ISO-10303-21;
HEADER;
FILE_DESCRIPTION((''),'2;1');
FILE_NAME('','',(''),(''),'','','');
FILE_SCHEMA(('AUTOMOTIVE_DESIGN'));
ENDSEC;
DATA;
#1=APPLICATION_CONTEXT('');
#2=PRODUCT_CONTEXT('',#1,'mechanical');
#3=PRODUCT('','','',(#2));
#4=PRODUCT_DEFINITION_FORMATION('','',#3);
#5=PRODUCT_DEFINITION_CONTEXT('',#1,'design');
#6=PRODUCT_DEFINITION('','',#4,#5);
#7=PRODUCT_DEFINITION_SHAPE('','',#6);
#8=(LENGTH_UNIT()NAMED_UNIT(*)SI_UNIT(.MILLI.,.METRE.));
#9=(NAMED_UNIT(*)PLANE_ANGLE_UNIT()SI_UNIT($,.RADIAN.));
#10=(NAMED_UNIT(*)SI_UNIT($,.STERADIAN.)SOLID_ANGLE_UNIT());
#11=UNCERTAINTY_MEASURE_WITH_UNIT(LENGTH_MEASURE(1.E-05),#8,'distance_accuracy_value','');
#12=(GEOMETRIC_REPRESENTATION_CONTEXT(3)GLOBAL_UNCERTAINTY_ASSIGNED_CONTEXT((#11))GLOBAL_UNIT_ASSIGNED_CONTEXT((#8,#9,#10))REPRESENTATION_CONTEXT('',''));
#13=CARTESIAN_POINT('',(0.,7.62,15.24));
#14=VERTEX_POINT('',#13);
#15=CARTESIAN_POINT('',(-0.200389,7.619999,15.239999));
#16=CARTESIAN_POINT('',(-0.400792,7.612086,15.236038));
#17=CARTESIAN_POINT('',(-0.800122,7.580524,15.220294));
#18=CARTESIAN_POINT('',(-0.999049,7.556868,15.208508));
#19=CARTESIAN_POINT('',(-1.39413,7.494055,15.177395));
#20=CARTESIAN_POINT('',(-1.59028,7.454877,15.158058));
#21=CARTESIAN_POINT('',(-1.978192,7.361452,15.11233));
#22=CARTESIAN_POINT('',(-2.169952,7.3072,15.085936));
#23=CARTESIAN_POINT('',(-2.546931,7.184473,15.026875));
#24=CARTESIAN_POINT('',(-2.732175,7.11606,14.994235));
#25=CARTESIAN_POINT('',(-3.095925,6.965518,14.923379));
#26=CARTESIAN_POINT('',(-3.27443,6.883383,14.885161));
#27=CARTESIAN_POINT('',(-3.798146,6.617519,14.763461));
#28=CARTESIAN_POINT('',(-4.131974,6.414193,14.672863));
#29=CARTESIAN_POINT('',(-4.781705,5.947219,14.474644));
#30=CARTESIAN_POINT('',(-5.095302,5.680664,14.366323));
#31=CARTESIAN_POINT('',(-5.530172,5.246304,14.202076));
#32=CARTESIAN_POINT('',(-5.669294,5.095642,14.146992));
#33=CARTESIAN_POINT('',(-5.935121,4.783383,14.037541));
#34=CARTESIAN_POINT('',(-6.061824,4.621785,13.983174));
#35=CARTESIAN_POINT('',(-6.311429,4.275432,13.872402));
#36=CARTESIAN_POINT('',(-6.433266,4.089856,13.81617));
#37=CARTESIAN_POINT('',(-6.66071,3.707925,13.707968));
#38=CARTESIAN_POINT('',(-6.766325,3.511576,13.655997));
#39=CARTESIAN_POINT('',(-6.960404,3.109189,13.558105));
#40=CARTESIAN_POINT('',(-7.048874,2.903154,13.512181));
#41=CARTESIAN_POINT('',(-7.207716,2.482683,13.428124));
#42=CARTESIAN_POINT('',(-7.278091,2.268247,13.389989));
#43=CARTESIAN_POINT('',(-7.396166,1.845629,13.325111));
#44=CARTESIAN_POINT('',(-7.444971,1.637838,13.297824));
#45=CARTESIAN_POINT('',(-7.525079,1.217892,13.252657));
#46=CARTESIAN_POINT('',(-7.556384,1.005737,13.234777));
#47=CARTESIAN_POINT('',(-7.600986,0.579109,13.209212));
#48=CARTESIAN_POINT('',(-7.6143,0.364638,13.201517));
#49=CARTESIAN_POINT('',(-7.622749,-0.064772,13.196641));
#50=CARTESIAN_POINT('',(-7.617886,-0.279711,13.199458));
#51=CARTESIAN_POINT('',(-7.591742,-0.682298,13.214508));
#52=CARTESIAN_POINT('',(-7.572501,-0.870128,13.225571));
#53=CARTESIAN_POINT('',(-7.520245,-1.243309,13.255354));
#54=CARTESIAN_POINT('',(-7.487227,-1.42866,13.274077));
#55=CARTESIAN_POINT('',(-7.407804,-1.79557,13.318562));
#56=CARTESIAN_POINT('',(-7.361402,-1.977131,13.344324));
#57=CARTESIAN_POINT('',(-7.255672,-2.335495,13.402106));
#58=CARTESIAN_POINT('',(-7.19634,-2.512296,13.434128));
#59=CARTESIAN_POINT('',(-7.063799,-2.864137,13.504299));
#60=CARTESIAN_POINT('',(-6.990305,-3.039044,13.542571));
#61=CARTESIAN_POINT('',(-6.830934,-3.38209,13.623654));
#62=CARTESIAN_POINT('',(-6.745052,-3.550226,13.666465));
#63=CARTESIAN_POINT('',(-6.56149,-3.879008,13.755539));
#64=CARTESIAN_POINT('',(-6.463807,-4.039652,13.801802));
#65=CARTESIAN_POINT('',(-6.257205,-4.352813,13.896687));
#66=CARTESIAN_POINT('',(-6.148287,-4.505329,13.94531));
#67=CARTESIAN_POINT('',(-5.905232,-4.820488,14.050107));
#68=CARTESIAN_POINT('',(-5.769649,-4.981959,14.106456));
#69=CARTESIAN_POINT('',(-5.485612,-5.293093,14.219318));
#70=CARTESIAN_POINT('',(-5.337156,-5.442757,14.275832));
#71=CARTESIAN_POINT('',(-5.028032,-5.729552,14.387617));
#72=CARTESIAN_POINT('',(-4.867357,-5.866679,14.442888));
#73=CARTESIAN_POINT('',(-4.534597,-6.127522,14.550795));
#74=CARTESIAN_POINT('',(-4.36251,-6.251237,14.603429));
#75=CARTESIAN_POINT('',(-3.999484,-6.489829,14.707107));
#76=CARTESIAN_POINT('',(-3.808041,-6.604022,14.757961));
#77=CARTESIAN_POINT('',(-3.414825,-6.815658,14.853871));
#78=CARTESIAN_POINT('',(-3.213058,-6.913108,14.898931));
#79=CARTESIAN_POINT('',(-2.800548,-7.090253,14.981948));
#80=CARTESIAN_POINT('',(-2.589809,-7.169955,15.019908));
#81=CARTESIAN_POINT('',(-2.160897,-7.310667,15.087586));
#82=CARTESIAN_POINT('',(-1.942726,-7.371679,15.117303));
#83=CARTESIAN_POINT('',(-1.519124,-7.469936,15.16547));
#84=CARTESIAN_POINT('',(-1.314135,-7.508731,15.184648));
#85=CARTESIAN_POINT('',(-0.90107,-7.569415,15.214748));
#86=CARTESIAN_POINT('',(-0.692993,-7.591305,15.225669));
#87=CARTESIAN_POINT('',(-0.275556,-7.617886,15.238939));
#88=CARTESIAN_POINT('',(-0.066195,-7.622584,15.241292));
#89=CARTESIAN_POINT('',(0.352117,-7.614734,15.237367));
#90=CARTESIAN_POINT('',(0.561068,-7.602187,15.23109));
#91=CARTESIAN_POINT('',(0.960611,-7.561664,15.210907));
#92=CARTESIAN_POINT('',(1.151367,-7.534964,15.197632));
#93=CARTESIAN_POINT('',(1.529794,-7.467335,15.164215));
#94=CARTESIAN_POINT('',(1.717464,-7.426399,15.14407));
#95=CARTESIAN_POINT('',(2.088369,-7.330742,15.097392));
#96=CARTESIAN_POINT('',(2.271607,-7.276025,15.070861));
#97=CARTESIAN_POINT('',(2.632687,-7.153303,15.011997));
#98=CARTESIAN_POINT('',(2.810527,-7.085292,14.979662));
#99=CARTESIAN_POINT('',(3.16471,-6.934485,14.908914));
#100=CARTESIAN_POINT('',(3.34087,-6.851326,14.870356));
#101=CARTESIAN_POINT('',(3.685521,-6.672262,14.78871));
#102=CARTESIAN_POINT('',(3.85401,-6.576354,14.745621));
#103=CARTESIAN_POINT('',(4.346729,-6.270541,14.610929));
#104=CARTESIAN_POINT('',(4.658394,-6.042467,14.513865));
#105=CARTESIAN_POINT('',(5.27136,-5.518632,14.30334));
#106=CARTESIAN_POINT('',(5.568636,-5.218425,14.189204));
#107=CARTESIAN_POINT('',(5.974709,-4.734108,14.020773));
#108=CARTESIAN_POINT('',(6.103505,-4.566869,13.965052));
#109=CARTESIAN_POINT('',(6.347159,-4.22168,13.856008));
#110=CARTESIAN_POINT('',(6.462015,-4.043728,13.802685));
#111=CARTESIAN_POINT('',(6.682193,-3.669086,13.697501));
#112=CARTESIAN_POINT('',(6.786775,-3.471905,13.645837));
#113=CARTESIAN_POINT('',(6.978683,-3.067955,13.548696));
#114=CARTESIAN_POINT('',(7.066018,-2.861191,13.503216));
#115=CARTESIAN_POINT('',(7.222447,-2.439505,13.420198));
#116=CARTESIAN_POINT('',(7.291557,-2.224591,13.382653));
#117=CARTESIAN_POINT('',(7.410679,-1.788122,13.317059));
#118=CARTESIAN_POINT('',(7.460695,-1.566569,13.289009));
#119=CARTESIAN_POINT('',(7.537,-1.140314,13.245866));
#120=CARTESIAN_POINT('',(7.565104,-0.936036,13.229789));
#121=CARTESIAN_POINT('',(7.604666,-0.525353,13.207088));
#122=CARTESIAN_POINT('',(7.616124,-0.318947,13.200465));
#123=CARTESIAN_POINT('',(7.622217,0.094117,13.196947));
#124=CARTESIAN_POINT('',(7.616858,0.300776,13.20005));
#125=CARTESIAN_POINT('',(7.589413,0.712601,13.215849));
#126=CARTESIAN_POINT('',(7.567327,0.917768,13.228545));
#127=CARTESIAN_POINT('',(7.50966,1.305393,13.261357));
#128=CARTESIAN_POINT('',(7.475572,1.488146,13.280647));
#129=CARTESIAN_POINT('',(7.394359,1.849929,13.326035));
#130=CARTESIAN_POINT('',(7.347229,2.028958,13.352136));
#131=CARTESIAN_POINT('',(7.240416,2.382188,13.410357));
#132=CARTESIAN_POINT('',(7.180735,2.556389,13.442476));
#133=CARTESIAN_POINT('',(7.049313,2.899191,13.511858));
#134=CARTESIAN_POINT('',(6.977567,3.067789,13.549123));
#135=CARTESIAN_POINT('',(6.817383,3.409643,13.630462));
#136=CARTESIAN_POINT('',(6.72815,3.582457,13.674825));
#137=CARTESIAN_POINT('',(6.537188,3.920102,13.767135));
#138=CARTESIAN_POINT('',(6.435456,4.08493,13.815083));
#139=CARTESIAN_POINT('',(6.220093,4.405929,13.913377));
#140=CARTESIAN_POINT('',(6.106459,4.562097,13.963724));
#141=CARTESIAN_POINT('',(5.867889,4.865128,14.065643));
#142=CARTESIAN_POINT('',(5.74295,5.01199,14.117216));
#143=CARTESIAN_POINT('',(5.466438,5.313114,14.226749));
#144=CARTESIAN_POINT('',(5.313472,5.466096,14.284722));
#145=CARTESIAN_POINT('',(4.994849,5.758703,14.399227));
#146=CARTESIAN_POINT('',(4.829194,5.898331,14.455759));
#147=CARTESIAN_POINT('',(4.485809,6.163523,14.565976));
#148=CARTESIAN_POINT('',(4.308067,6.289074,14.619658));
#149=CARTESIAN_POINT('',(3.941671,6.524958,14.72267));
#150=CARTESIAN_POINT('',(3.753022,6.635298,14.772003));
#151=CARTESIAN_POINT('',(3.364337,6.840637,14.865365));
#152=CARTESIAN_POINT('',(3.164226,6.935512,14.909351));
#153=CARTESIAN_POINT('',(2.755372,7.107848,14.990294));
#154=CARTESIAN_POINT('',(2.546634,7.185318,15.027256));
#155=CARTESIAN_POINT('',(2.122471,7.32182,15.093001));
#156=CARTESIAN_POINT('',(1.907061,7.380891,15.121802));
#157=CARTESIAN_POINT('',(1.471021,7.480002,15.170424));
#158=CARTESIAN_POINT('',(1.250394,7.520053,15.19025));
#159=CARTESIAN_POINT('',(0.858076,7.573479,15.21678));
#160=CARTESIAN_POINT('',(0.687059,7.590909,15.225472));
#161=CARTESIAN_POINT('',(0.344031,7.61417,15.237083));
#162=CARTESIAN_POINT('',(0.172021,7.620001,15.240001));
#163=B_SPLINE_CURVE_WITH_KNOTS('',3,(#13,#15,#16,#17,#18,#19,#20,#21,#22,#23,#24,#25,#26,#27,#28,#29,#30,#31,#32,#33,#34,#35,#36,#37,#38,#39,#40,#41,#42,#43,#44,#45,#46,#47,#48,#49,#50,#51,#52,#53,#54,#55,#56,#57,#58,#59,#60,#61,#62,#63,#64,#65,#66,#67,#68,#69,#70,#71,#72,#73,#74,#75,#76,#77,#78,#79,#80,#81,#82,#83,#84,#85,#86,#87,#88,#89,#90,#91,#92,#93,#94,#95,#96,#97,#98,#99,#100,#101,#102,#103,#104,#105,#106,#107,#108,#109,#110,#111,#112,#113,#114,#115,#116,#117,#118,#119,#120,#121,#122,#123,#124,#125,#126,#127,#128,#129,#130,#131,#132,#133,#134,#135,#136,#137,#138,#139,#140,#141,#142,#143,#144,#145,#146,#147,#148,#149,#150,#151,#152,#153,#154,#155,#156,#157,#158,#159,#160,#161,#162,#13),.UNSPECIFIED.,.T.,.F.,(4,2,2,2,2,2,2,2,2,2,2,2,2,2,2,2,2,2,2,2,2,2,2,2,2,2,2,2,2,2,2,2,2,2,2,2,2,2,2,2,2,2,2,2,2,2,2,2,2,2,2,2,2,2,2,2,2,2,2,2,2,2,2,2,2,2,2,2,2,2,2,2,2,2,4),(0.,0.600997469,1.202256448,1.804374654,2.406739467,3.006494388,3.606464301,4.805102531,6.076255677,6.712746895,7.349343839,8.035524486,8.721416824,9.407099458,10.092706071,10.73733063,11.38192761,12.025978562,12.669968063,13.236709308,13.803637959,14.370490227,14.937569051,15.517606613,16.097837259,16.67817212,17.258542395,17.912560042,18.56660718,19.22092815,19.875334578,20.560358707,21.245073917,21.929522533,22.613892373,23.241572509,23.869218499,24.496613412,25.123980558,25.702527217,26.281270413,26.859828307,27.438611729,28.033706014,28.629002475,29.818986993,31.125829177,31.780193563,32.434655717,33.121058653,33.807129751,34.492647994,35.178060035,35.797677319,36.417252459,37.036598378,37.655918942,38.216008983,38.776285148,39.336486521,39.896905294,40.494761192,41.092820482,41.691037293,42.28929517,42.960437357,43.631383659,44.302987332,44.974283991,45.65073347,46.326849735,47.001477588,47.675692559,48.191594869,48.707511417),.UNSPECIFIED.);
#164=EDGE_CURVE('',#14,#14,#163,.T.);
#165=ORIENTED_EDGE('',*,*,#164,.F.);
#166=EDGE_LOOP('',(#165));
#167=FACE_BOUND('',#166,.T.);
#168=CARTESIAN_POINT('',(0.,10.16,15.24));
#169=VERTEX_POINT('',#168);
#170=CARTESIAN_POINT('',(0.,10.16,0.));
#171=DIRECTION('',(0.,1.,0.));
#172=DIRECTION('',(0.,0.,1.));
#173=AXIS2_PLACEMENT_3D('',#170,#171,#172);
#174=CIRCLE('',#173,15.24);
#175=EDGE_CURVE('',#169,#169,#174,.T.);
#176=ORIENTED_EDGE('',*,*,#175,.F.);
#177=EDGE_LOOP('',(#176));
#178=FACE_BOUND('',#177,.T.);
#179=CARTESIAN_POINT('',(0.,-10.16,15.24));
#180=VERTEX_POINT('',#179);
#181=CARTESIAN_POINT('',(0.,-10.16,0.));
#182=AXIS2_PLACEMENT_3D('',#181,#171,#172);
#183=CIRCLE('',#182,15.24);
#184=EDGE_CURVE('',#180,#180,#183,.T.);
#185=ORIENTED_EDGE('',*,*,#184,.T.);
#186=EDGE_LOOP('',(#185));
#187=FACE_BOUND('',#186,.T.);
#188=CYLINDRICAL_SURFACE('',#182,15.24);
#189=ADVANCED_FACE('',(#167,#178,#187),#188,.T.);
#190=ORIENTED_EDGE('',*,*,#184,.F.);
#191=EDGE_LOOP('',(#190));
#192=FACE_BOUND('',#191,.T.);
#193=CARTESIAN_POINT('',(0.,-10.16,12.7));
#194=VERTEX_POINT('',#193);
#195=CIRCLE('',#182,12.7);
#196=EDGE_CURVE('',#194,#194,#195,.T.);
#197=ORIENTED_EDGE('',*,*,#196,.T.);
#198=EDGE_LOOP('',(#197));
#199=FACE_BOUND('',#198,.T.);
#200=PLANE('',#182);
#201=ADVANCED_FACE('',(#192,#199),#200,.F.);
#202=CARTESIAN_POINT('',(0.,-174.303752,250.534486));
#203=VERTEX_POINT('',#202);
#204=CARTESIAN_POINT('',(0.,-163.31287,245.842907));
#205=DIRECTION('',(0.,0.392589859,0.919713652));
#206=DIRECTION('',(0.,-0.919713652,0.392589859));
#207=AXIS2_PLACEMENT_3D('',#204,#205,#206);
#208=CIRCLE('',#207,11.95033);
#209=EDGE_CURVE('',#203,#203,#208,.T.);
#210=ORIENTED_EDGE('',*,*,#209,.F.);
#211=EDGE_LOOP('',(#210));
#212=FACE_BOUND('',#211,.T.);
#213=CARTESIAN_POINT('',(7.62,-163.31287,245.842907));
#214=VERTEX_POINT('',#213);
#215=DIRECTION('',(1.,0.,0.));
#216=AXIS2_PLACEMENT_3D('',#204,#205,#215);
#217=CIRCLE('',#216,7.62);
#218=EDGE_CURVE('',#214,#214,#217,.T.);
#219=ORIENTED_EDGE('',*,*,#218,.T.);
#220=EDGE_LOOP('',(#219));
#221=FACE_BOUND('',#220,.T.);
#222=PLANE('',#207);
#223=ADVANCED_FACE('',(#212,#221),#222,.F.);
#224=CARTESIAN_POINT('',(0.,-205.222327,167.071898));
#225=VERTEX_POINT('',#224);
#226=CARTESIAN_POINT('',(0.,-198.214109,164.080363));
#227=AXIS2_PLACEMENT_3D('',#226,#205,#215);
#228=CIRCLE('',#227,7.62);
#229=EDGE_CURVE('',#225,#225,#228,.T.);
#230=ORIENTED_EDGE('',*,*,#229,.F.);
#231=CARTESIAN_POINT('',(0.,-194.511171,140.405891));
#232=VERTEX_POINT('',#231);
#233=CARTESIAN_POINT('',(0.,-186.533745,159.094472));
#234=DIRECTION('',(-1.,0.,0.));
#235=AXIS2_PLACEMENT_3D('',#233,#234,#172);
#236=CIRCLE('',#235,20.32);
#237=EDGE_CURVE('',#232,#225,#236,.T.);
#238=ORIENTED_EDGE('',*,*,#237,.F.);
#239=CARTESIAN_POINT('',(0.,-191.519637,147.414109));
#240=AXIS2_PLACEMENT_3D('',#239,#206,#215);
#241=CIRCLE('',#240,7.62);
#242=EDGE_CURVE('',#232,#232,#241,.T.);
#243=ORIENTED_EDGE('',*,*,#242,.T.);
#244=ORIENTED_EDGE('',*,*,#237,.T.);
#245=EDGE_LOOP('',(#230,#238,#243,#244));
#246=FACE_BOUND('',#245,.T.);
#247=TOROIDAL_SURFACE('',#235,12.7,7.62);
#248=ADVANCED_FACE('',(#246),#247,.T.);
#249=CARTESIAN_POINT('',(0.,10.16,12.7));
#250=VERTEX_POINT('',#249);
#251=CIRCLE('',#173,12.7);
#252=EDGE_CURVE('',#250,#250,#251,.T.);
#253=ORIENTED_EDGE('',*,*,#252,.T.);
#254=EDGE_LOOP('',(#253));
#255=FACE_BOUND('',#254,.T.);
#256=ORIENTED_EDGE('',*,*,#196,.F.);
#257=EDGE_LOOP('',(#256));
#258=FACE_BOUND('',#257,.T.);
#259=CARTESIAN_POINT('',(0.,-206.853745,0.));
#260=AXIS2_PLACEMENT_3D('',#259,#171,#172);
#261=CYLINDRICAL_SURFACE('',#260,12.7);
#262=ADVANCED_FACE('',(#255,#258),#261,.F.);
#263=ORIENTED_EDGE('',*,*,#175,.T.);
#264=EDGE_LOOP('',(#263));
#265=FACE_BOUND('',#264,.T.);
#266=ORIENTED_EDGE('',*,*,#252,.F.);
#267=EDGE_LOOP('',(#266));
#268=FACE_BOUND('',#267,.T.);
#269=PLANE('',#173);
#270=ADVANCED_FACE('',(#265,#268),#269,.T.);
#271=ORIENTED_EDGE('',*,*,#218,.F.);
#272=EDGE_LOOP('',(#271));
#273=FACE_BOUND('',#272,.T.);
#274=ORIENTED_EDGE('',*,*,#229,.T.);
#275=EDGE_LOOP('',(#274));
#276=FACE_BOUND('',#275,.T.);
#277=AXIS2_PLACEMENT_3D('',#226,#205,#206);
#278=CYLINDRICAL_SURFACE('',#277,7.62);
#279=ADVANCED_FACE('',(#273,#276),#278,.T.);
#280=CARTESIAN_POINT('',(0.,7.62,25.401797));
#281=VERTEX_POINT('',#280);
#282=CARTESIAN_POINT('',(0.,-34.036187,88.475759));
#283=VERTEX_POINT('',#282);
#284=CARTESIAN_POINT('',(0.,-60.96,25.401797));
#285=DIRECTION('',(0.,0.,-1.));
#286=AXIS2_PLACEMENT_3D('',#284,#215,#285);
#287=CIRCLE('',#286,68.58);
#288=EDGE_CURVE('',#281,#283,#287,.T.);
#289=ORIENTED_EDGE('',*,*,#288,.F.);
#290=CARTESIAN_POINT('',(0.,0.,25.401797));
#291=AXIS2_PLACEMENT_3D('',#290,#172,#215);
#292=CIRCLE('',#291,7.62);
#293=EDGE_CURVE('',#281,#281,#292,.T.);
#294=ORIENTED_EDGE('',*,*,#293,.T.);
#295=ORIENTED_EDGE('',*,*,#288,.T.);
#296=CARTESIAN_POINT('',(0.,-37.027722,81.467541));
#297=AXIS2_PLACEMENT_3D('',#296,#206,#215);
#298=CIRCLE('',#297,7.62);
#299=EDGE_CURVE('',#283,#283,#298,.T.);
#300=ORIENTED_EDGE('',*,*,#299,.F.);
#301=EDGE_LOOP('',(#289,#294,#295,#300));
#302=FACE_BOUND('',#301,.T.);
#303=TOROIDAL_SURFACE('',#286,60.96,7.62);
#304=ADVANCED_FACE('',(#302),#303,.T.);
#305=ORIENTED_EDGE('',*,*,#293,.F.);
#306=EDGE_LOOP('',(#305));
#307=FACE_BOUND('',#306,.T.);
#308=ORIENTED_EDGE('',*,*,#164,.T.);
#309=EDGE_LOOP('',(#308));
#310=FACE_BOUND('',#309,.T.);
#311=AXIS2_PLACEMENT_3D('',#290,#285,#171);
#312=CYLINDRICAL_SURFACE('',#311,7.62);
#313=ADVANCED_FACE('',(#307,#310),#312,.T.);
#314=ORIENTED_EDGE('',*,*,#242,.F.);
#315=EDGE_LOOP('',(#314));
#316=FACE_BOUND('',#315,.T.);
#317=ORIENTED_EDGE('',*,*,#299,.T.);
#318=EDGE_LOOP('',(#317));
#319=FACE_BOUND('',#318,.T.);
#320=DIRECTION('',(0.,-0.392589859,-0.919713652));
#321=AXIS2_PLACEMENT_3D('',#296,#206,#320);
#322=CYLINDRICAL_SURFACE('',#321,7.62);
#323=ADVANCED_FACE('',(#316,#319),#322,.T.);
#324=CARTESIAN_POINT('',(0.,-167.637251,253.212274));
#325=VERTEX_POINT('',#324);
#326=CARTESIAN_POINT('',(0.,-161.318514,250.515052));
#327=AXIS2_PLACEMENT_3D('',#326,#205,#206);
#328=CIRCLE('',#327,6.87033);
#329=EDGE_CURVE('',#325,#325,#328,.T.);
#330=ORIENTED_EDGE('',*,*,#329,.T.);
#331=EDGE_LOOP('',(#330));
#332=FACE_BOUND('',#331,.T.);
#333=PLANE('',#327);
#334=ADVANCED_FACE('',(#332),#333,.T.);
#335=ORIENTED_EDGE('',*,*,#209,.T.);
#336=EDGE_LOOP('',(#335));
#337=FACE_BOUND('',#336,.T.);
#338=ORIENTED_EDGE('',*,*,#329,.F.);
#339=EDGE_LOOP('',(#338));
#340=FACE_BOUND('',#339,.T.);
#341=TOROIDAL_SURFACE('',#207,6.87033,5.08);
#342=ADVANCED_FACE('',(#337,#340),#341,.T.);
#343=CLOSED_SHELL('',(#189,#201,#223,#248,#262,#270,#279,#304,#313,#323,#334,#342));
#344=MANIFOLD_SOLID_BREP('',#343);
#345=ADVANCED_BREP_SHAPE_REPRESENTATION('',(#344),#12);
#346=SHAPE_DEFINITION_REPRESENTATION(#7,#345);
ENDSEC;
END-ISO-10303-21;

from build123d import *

# Parameters (mm, degrees)
SKETCH2_R                = 7.62
SKETCH4_R                = 11.950330427
BOSS_EXTRUDE1_DEPTH      = 5.08
FILLET1_R                = 5.08
BOSS_EXTRUDE2_DEPTH      = 10.16
BOSS_EXTRUDE2_DEPTH_BACK = 10.16
SKETCH5_R                = 15.24
SKETCH6_R                = 12.7
CUT_EXTRUDE1_DEPTH       = 335.141301153


with BuildPart() as part:
    # Sweep1: sweep along a path in Sketch1
    with BuildLine(Plane(origin=(0, 0, 0), x_dir=(0, 0, -1), z_dir=(1, 0, 0))) as sweep1_path:
        Line((-245.842907084, -163.312870299), (-164.080363385, -198.214108787))
        ThreePointArc((-164.080363385, -198.214108787), (-154.360765503, -198.318567045), (-147.414108787, -191.519636615))
        Line((-147.414108787, -191.519636615), (-81.467540759, -37.02772218))
        ThreePointArc((-81.467540759, -37.02772218), (-58.996512939, -10.092361683), (-25.401796509, 0))
        Line((-25.401796509, 0), (0, 0))
    # Sketch2 → Sweep1 (sweep)
    with BuildSketch(Plane.XY):
        Circle(SKETCH2_R)
    sweep(path=sweep1_path.line)

    # Sketch4 → Boss-Extrude1 (add)
    with BuildSketch(Plane(origin=(0, 63.595671041, 148.98450765), x_dir=(1, 0, 0), z_dir=(0, 0.39258985925704815, 0.9197136523986861))):
        with Locations(Location((0, -246.716508718, 0), (0, 0, 270))):
            Circle(SKETCH4_R)
    extrude(amount=BOSS_EXTRUDE1_DEPTH)

    # Fillet1
    fillet1_edges = [part.edges().sort_by_distance(p)[0] for p in [
        (0, -150.32763177, 245.823473898),
    ]]
    fillet(fillet1_edges, radius=FILLET1_R - 0.0001)  # a hair under: the kernel refuses the full size

    # Sketch5 → Boss-Extrude2 (add, two sides: drawn at the far end of the back side and taken through both)
    with BuildSketch(Plane(origin=(0, 0, 0), x_dir=(1, 0, 0), z_dir=(0, 1, 0)).offset(-BOSS_EXTRUDE2_DEPTH_BACK)):
        with Locations(Location((0, 0, 0), (0, 0, 270))):
            Circle(SKETCH5_R)
    extrude(amount=BOSS_EXTRUDE2_DEPTH + BOSS_EXTRUDE2_DEPTH_BACK)

    # Sketch6 → Cut-Extrude1 (cut, through all)
    with BuildSketch(Plane(origin=(0, 10.16, 0), x_dir=(1, 0, 0), z_dir=(0, 1, 0))):
        with Locations(Location((0, 0, 0), (0, 0, 270))):
            Circle(SKETCH6_R)
    extrude(amount=-CUT_EXTRUDE1_DEPTH, mode=Mode.SUBTRACT)


solid = part.part
